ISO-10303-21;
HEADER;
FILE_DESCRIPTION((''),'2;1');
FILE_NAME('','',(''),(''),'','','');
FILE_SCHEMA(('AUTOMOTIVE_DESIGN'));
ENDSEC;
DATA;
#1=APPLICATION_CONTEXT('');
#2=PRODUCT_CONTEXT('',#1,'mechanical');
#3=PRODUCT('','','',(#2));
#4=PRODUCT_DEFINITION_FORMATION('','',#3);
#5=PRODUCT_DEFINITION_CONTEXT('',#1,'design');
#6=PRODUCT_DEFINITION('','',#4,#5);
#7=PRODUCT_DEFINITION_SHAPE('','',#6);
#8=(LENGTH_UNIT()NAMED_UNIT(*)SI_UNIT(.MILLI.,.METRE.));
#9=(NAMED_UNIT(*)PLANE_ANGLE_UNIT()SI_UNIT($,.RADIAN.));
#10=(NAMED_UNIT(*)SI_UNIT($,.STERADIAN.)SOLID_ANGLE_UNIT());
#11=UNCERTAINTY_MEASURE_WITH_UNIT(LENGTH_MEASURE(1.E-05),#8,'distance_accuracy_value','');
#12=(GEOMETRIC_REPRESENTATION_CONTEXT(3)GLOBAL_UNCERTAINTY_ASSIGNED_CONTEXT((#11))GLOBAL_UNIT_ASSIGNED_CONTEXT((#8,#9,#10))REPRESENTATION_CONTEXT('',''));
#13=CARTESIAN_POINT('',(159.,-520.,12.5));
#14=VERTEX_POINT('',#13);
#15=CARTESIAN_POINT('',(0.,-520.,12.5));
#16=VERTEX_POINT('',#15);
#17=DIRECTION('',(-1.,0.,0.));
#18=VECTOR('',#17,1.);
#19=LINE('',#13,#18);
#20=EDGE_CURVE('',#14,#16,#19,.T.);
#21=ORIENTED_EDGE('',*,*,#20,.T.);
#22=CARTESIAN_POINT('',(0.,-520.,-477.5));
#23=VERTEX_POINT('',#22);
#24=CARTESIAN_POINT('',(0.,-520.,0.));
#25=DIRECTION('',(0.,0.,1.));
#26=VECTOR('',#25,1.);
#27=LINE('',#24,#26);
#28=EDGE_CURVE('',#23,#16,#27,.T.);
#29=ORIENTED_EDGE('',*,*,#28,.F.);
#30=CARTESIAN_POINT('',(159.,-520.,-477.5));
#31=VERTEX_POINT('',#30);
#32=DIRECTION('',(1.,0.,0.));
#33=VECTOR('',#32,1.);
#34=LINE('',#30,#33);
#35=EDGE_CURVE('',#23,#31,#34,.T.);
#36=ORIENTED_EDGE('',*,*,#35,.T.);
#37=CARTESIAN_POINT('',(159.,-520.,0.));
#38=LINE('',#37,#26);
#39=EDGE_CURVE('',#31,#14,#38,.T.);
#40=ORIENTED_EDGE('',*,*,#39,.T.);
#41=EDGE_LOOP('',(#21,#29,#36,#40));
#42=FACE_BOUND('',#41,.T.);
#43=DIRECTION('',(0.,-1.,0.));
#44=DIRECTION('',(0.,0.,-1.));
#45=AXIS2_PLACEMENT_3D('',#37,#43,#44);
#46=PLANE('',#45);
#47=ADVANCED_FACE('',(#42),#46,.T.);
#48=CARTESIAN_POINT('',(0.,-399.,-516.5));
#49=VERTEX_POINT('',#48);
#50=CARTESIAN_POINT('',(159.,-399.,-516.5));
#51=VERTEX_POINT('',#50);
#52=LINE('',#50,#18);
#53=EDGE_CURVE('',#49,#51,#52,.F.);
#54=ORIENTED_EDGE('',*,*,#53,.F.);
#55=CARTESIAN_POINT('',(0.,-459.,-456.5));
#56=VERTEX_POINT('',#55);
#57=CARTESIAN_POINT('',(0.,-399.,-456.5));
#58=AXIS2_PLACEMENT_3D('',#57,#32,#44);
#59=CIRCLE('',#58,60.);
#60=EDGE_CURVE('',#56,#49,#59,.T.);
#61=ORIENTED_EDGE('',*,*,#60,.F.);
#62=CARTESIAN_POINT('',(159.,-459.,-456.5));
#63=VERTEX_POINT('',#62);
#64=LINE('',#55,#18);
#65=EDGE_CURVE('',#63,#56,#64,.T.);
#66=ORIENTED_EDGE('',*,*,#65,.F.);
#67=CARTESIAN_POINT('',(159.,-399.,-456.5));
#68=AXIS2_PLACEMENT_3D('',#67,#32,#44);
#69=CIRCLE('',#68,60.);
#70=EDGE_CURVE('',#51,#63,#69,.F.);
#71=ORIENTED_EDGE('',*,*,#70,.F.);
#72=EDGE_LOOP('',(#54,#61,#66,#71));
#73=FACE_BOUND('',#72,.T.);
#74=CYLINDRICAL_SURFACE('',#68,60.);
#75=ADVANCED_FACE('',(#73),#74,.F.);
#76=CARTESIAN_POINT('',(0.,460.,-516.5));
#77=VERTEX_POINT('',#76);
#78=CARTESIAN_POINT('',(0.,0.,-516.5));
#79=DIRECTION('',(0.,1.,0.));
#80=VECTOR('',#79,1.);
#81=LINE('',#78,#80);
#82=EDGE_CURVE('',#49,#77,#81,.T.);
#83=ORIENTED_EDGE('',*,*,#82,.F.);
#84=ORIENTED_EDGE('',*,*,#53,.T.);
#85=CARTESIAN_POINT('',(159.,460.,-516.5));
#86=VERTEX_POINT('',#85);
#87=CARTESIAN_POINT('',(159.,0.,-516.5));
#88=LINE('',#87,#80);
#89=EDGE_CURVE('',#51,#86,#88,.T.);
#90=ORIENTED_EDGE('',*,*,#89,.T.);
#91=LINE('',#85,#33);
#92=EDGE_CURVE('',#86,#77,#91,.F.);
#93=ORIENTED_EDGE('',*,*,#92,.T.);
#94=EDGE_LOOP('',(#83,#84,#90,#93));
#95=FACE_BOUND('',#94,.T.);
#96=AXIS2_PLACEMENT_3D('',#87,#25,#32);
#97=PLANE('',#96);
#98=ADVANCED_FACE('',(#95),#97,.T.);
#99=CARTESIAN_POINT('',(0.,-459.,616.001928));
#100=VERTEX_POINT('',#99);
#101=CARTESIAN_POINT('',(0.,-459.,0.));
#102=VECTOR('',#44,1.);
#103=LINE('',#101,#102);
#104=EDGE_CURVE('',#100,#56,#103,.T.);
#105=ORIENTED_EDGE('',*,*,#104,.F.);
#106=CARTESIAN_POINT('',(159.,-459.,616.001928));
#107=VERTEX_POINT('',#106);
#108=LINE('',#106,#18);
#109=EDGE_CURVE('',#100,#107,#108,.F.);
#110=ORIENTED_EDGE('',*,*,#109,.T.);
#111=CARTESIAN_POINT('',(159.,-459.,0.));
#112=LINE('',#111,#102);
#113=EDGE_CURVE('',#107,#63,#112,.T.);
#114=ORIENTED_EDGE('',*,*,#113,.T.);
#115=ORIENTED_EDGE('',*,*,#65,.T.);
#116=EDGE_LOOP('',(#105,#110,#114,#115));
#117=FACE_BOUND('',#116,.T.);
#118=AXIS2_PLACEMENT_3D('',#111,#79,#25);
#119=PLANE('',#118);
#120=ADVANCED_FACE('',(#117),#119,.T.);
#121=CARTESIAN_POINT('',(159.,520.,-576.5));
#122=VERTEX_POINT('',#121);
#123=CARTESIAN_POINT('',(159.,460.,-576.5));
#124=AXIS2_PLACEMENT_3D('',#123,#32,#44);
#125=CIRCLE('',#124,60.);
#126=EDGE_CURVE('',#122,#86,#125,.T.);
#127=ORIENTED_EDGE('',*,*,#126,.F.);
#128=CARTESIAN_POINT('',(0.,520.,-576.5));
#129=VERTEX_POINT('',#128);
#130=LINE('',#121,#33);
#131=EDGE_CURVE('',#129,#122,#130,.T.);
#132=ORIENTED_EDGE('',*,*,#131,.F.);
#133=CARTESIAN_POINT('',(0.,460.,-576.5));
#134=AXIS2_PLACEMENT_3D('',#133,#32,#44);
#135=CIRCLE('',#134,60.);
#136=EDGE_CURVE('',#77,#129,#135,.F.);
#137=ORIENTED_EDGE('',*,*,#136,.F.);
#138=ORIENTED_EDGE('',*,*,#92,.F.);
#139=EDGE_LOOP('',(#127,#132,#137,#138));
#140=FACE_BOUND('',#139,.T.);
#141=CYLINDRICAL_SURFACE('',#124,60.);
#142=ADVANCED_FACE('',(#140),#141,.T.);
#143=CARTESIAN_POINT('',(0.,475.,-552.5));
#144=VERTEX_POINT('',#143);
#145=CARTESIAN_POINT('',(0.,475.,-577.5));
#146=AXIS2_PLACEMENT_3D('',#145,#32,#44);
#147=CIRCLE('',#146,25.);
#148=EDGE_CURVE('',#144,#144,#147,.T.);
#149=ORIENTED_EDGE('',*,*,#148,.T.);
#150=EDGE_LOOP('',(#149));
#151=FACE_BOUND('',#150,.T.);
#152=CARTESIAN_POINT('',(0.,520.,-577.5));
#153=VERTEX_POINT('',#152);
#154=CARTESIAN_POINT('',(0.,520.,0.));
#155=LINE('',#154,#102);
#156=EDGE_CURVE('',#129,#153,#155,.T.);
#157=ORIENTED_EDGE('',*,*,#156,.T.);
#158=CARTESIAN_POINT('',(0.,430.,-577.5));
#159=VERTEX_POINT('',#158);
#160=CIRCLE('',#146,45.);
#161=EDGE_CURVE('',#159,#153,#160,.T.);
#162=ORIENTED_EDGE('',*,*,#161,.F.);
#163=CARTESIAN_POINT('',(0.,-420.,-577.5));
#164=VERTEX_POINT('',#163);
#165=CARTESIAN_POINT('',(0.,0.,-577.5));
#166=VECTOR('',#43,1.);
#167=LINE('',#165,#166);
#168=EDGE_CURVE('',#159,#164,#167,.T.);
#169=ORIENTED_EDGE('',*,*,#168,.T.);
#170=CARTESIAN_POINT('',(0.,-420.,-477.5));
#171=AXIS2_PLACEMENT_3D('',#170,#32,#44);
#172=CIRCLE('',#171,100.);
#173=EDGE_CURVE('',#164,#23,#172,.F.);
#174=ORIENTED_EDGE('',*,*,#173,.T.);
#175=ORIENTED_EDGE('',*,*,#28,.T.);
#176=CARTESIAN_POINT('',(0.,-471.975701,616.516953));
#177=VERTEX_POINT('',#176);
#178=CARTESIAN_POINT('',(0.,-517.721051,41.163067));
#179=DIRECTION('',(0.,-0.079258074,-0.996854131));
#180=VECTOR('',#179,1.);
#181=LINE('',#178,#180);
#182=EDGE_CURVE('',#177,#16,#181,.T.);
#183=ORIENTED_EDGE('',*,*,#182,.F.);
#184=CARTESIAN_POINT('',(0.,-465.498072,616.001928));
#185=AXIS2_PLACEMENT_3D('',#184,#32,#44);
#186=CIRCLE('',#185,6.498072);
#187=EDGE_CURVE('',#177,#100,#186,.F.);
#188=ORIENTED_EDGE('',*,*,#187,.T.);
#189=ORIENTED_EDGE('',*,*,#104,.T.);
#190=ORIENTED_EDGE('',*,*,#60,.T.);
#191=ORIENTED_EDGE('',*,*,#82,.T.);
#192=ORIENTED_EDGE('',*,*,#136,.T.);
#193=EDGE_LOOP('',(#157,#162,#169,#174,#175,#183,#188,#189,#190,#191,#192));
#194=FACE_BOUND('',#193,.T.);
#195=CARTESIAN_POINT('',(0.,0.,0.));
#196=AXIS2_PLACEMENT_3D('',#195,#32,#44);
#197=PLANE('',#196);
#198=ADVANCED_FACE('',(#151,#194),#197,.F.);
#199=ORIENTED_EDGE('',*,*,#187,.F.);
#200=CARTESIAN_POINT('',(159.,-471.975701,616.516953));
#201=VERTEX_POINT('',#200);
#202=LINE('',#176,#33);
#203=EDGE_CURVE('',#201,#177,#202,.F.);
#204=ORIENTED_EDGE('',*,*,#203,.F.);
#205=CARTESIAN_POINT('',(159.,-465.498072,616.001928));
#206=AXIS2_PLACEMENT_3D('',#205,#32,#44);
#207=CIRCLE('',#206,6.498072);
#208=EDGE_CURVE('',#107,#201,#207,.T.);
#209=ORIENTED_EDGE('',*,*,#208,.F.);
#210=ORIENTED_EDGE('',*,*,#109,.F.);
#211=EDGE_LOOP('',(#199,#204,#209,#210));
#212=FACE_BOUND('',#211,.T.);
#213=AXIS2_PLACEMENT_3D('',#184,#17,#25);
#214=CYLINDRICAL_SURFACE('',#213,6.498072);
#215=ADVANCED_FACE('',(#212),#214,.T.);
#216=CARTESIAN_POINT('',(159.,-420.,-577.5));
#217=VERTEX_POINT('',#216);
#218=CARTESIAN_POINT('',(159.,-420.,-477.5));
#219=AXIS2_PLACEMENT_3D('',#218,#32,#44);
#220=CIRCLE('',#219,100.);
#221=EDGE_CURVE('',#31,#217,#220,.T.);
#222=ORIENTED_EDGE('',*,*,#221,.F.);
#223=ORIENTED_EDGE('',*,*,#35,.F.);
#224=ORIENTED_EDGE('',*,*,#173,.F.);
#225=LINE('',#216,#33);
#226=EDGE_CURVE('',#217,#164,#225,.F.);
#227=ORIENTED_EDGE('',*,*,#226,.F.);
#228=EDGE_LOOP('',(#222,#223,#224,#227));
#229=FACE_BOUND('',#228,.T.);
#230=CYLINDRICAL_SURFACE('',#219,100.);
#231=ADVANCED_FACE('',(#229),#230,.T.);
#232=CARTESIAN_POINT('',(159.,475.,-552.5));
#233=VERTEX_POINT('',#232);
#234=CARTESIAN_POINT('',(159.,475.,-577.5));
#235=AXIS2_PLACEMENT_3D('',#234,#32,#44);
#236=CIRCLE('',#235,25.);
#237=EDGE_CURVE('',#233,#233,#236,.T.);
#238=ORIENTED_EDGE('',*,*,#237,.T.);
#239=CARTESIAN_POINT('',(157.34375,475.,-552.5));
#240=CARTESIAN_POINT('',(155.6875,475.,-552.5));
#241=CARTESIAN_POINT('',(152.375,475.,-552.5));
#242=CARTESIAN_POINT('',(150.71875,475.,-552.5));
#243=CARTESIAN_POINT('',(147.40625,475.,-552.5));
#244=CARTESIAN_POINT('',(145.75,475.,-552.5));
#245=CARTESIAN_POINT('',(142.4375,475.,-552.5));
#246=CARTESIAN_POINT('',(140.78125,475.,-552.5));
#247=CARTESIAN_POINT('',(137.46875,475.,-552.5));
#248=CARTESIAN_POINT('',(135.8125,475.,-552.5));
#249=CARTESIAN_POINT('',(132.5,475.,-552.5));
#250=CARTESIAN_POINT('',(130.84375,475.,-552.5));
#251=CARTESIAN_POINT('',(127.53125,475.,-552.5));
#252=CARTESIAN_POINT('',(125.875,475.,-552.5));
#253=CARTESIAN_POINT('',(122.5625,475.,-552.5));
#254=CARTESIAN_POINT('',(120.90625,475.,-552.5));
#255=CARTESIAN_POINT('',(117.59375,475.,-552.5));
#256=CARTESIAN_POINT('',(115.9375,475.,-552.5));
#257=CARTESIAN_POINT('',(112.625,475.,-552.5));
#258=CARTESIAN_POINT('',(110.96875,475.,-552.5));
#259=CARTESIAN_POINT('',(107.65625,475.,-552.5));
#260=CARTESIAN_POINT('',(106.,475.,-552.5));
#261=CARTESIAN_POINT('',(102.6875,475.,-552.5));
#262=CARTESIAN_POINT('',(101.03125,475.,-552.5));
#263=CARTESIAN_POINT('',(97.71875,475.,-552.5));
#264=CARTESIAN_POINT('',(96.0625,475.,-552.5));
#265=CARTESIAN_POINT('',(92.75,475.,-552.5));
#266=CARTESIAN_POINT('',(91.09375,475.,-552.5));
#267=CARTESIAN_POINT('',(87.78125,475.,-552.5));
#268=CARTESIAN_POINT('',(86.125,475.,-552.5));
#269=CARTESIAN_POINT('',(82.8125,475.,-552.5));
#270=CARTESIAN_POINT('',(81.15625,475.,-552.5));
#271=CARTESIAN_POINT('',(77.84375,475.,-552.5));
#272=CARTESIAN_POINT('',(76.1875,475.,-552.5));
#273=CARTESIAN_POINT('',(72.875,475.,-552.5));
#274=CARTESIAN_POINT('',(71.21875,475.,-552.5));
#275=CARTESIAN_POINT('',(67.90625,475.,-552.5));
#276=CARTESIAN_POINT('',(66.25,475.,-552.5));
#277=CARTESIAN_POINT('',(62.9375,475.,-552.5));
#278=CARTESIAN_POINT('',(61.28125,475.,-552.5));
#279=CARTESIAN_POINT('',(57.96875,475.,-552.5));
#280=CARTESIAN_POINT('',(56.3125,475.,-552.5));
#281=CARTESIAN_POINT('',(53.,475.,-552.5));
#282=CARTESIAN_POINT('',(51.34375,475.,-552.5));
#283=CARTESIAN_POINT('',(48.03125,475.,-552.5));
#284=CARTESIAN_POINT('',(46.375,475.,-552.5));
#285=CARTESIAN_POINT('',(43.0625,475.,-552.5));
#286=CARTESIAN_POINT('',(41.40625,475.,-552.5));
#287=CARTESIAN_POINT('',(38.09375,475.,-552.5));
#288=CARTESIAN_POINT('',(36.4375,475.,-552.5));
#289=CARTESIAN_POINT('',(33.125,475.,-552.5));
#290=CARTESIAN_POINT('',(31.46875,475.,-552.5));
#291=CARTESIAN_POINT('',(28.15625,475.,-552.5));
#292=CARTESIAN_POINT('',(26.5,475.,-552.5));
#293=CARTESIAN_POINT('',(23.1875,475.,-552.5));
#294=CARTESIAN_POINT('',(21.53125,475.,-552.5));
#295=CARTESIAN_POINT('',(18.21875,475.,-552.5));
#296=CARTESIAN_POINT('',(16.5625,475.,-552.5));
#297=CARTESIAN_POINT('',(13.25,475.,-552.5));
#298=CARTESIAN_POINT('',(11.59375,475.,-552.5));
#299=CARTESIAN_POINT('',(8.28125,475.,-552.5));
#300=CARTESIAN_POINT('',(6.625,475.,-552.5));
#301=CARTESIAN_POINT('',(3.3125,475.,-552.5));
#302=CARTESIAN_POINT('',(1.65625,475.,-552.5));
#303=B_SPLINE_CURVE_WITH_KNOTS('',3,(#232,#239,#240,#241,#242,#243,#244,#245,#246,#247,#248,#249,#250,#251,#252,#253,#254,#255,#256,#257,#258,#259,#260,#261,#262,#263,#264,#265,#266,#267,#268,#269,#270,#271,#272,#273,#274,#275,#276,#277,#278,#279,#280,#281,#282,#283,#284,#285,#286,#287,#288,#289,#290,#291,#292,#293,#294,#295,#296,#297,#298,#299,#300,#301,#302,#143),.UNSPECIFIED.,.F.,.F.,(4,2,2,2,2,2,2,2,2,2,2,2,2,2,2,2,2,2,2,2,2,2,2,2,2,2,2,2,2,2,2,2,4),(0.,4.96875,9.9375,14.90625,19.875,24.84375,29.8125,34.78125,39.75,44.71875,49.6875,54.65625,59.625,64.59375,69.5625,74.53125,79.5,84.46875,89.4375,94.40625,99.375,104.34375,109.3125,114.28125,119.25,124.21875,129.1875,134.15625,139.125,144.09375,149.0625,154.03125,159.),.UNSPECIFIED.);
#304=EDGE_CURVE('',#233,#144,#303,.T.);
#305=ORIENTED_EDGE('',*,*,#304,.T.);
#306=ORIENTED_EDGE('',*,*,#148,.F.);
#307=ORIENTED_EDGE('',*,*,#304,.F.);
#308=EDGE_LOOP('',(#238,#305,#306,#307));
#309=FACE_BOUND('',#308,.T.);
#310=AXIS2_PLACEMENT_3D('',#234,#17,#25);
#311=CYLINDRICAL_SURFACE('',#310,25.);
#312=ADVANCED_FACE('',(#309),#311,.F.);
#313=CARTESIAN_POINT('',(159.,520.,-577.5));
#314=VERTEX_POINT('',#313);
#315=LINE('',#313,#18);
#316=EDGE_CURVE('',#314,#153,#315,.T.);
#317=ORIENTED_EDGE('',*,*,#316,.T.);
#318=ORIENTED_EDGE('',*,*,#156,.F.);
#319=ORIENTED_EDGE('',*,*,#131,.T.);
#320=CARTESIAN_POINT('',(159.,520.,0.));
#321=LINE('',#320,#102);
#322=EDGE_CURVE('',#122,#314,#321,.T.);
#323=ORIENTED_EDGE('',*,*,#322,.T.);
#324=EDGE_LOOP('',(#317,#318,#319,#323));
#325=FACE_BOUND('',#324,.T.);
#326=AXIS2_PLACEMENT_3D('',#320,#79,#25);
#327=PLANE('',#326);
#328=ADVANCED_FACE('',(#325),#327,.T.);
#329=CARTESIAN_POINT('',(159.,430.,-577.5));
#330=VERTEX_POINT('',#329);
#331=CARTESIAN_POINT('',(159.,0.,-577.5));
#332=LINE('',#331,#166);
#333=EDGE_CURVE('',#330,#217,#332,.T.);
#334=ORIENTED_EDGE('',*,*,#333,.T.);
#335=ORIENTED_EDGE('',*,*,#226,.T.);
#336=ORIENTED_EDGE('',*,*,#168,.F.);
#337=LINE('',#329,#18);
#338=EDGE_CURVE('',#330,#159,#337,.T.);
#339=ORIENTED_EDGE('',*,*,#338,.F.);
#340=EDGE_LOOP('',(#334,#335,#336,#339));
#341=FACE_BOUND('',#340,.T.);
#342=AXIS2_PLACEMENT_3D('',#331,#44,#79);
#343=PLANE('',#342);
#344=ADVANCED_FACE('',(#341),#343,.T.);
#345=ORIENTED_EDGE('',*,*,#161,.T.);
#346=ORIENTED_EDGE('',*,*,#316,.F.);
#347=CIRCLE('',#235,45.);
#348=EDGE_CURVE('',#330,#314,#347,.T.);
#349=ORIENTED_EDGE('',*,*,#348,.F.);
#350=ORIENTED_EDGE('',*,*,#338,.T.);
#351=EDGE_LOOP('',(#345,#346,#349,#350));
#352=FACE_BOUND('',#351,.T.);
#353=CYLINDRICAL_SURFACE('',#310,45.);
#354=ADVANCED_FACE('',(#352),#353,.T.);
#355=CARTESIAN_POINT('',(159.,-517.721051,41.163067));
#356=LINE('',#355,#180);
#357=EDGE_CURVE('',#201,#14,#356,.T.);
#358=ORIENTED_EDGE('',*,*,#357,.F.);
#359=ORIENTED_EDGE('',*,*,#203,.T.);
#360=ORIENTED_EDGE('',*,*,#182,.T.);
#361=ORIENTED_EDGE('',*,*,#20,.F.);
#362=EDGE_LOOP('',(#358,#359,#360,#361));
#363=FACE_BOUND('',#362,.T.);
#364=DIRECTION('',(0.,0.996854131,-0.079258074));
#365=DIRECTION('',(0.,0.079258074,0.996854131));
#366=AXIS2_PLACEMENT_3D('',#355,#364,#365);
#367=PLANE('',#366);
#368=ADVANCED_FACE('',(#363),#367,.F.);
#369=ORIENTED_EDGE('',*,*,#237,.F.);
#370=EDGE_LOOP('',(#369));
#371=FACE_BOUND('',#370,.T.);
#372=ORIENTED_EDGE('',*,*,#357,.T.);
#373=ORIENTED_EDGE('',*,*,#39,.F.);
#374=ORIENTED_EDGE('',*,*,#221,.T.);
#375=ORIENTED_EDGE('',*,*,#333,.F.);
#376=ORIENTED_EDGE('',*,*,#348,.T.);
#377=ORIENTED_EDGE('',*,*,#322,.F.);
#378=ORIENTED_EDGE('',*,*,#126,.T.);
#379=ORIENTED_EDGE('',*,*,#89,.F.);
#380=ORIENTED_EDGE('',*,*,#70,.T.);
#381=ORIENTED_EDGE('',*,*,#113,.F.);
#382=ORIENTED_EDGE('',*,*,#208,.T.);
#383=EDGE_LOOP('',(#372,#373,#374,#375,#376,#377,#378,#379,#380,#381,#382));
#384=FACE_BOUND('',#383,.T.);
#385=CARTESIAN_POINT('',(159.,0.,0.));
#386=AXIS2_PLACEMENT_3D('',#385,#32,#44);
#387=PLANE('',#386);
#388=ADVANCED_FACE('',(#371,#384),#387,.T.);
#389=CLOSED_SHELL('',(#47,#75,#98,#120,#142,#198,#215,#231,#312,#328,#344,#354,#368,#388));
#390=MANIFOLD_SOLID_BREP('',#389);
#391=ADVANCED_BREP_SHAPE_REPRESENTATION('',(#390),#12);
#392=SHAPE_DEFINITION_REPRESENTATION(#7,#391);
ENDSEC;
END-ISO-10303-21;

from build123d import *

# Parameters (mm, degrees)
SKETCH1_R           = 25
BOSS_EXTRUDE1_DEPTH = 159
FILLET1_R           = 60
FILLET2_R           = 60
FILLET3_R           = 100
FILLET4_R           = 6.498072


with BuildPart() as part:
    # Sketch1 → Boss-Extrude1 (new body)
    with BuildSketch(Plane(origin=(0, 0, 0), x_dir=(0, 0, -1), z_dir=(1, 0, 0))):
        with BuildLine():
            Line((577.5, 430), (577.5, -520))
            Line((577.5, -520), (-12.5, -520))
            Line((-12.5, -520), (-622.5, -471.5))
            Line((-622.5, -471.5), (-622.5, -459))
            Line((-622.5, -459), (516.5, -459))
            Line((516.5, -459), (516.5, 430))
            Line((516.5, 430), (516.5, 520))
            Line((516.5, 520), (577.5, 520))
            ThreePointArc((577.5, 520), (622.5, 475), (577.5, 430))
        make_face()
        with Locations(Location((577.5, 475, 0), (0, 0, 180))):
            Circle(SKETCH1_R, mode=Mode.SUBTRACT)
    extrude(amount=BOSS_EXTRUDE1_DEPTH)

    # Fillet1
    fillet1_edges = [part.edges().sort_by_distance(p)[0] for p in [
        (79.5, 520, -516.5),
    ]]
    fillet(fillet1_edges, radius=FILLET1_R)

    # Fillet2
    fillet2_edges = [part.edges().sort_by_distance(p)[0] for p in [
        (79.5, -459, -516.5),
    ]]
    fillet(fillet2_edges, radius=FILLET2_R)

    # Fillet3
    fillet3_edges = [part.edges().sort_by_distance(p)[0] for p in [
        (79.5, -520, -577.5),
    ]]
    fillet(fillet3_edges, radius=FILLET3_R)

    # Fillet4
    fillet4_edges = [part.edges().sort_by_distance(p)[0] for p in [
        (79.5, -471.5, 622.5),
        (79.5, -459, 622.5),
    ]]
    fillet(fillet4_edges, radius=FILLET4_R - 0.0001)  # a hair under: the kernel refuses the full size


solid = part.part
